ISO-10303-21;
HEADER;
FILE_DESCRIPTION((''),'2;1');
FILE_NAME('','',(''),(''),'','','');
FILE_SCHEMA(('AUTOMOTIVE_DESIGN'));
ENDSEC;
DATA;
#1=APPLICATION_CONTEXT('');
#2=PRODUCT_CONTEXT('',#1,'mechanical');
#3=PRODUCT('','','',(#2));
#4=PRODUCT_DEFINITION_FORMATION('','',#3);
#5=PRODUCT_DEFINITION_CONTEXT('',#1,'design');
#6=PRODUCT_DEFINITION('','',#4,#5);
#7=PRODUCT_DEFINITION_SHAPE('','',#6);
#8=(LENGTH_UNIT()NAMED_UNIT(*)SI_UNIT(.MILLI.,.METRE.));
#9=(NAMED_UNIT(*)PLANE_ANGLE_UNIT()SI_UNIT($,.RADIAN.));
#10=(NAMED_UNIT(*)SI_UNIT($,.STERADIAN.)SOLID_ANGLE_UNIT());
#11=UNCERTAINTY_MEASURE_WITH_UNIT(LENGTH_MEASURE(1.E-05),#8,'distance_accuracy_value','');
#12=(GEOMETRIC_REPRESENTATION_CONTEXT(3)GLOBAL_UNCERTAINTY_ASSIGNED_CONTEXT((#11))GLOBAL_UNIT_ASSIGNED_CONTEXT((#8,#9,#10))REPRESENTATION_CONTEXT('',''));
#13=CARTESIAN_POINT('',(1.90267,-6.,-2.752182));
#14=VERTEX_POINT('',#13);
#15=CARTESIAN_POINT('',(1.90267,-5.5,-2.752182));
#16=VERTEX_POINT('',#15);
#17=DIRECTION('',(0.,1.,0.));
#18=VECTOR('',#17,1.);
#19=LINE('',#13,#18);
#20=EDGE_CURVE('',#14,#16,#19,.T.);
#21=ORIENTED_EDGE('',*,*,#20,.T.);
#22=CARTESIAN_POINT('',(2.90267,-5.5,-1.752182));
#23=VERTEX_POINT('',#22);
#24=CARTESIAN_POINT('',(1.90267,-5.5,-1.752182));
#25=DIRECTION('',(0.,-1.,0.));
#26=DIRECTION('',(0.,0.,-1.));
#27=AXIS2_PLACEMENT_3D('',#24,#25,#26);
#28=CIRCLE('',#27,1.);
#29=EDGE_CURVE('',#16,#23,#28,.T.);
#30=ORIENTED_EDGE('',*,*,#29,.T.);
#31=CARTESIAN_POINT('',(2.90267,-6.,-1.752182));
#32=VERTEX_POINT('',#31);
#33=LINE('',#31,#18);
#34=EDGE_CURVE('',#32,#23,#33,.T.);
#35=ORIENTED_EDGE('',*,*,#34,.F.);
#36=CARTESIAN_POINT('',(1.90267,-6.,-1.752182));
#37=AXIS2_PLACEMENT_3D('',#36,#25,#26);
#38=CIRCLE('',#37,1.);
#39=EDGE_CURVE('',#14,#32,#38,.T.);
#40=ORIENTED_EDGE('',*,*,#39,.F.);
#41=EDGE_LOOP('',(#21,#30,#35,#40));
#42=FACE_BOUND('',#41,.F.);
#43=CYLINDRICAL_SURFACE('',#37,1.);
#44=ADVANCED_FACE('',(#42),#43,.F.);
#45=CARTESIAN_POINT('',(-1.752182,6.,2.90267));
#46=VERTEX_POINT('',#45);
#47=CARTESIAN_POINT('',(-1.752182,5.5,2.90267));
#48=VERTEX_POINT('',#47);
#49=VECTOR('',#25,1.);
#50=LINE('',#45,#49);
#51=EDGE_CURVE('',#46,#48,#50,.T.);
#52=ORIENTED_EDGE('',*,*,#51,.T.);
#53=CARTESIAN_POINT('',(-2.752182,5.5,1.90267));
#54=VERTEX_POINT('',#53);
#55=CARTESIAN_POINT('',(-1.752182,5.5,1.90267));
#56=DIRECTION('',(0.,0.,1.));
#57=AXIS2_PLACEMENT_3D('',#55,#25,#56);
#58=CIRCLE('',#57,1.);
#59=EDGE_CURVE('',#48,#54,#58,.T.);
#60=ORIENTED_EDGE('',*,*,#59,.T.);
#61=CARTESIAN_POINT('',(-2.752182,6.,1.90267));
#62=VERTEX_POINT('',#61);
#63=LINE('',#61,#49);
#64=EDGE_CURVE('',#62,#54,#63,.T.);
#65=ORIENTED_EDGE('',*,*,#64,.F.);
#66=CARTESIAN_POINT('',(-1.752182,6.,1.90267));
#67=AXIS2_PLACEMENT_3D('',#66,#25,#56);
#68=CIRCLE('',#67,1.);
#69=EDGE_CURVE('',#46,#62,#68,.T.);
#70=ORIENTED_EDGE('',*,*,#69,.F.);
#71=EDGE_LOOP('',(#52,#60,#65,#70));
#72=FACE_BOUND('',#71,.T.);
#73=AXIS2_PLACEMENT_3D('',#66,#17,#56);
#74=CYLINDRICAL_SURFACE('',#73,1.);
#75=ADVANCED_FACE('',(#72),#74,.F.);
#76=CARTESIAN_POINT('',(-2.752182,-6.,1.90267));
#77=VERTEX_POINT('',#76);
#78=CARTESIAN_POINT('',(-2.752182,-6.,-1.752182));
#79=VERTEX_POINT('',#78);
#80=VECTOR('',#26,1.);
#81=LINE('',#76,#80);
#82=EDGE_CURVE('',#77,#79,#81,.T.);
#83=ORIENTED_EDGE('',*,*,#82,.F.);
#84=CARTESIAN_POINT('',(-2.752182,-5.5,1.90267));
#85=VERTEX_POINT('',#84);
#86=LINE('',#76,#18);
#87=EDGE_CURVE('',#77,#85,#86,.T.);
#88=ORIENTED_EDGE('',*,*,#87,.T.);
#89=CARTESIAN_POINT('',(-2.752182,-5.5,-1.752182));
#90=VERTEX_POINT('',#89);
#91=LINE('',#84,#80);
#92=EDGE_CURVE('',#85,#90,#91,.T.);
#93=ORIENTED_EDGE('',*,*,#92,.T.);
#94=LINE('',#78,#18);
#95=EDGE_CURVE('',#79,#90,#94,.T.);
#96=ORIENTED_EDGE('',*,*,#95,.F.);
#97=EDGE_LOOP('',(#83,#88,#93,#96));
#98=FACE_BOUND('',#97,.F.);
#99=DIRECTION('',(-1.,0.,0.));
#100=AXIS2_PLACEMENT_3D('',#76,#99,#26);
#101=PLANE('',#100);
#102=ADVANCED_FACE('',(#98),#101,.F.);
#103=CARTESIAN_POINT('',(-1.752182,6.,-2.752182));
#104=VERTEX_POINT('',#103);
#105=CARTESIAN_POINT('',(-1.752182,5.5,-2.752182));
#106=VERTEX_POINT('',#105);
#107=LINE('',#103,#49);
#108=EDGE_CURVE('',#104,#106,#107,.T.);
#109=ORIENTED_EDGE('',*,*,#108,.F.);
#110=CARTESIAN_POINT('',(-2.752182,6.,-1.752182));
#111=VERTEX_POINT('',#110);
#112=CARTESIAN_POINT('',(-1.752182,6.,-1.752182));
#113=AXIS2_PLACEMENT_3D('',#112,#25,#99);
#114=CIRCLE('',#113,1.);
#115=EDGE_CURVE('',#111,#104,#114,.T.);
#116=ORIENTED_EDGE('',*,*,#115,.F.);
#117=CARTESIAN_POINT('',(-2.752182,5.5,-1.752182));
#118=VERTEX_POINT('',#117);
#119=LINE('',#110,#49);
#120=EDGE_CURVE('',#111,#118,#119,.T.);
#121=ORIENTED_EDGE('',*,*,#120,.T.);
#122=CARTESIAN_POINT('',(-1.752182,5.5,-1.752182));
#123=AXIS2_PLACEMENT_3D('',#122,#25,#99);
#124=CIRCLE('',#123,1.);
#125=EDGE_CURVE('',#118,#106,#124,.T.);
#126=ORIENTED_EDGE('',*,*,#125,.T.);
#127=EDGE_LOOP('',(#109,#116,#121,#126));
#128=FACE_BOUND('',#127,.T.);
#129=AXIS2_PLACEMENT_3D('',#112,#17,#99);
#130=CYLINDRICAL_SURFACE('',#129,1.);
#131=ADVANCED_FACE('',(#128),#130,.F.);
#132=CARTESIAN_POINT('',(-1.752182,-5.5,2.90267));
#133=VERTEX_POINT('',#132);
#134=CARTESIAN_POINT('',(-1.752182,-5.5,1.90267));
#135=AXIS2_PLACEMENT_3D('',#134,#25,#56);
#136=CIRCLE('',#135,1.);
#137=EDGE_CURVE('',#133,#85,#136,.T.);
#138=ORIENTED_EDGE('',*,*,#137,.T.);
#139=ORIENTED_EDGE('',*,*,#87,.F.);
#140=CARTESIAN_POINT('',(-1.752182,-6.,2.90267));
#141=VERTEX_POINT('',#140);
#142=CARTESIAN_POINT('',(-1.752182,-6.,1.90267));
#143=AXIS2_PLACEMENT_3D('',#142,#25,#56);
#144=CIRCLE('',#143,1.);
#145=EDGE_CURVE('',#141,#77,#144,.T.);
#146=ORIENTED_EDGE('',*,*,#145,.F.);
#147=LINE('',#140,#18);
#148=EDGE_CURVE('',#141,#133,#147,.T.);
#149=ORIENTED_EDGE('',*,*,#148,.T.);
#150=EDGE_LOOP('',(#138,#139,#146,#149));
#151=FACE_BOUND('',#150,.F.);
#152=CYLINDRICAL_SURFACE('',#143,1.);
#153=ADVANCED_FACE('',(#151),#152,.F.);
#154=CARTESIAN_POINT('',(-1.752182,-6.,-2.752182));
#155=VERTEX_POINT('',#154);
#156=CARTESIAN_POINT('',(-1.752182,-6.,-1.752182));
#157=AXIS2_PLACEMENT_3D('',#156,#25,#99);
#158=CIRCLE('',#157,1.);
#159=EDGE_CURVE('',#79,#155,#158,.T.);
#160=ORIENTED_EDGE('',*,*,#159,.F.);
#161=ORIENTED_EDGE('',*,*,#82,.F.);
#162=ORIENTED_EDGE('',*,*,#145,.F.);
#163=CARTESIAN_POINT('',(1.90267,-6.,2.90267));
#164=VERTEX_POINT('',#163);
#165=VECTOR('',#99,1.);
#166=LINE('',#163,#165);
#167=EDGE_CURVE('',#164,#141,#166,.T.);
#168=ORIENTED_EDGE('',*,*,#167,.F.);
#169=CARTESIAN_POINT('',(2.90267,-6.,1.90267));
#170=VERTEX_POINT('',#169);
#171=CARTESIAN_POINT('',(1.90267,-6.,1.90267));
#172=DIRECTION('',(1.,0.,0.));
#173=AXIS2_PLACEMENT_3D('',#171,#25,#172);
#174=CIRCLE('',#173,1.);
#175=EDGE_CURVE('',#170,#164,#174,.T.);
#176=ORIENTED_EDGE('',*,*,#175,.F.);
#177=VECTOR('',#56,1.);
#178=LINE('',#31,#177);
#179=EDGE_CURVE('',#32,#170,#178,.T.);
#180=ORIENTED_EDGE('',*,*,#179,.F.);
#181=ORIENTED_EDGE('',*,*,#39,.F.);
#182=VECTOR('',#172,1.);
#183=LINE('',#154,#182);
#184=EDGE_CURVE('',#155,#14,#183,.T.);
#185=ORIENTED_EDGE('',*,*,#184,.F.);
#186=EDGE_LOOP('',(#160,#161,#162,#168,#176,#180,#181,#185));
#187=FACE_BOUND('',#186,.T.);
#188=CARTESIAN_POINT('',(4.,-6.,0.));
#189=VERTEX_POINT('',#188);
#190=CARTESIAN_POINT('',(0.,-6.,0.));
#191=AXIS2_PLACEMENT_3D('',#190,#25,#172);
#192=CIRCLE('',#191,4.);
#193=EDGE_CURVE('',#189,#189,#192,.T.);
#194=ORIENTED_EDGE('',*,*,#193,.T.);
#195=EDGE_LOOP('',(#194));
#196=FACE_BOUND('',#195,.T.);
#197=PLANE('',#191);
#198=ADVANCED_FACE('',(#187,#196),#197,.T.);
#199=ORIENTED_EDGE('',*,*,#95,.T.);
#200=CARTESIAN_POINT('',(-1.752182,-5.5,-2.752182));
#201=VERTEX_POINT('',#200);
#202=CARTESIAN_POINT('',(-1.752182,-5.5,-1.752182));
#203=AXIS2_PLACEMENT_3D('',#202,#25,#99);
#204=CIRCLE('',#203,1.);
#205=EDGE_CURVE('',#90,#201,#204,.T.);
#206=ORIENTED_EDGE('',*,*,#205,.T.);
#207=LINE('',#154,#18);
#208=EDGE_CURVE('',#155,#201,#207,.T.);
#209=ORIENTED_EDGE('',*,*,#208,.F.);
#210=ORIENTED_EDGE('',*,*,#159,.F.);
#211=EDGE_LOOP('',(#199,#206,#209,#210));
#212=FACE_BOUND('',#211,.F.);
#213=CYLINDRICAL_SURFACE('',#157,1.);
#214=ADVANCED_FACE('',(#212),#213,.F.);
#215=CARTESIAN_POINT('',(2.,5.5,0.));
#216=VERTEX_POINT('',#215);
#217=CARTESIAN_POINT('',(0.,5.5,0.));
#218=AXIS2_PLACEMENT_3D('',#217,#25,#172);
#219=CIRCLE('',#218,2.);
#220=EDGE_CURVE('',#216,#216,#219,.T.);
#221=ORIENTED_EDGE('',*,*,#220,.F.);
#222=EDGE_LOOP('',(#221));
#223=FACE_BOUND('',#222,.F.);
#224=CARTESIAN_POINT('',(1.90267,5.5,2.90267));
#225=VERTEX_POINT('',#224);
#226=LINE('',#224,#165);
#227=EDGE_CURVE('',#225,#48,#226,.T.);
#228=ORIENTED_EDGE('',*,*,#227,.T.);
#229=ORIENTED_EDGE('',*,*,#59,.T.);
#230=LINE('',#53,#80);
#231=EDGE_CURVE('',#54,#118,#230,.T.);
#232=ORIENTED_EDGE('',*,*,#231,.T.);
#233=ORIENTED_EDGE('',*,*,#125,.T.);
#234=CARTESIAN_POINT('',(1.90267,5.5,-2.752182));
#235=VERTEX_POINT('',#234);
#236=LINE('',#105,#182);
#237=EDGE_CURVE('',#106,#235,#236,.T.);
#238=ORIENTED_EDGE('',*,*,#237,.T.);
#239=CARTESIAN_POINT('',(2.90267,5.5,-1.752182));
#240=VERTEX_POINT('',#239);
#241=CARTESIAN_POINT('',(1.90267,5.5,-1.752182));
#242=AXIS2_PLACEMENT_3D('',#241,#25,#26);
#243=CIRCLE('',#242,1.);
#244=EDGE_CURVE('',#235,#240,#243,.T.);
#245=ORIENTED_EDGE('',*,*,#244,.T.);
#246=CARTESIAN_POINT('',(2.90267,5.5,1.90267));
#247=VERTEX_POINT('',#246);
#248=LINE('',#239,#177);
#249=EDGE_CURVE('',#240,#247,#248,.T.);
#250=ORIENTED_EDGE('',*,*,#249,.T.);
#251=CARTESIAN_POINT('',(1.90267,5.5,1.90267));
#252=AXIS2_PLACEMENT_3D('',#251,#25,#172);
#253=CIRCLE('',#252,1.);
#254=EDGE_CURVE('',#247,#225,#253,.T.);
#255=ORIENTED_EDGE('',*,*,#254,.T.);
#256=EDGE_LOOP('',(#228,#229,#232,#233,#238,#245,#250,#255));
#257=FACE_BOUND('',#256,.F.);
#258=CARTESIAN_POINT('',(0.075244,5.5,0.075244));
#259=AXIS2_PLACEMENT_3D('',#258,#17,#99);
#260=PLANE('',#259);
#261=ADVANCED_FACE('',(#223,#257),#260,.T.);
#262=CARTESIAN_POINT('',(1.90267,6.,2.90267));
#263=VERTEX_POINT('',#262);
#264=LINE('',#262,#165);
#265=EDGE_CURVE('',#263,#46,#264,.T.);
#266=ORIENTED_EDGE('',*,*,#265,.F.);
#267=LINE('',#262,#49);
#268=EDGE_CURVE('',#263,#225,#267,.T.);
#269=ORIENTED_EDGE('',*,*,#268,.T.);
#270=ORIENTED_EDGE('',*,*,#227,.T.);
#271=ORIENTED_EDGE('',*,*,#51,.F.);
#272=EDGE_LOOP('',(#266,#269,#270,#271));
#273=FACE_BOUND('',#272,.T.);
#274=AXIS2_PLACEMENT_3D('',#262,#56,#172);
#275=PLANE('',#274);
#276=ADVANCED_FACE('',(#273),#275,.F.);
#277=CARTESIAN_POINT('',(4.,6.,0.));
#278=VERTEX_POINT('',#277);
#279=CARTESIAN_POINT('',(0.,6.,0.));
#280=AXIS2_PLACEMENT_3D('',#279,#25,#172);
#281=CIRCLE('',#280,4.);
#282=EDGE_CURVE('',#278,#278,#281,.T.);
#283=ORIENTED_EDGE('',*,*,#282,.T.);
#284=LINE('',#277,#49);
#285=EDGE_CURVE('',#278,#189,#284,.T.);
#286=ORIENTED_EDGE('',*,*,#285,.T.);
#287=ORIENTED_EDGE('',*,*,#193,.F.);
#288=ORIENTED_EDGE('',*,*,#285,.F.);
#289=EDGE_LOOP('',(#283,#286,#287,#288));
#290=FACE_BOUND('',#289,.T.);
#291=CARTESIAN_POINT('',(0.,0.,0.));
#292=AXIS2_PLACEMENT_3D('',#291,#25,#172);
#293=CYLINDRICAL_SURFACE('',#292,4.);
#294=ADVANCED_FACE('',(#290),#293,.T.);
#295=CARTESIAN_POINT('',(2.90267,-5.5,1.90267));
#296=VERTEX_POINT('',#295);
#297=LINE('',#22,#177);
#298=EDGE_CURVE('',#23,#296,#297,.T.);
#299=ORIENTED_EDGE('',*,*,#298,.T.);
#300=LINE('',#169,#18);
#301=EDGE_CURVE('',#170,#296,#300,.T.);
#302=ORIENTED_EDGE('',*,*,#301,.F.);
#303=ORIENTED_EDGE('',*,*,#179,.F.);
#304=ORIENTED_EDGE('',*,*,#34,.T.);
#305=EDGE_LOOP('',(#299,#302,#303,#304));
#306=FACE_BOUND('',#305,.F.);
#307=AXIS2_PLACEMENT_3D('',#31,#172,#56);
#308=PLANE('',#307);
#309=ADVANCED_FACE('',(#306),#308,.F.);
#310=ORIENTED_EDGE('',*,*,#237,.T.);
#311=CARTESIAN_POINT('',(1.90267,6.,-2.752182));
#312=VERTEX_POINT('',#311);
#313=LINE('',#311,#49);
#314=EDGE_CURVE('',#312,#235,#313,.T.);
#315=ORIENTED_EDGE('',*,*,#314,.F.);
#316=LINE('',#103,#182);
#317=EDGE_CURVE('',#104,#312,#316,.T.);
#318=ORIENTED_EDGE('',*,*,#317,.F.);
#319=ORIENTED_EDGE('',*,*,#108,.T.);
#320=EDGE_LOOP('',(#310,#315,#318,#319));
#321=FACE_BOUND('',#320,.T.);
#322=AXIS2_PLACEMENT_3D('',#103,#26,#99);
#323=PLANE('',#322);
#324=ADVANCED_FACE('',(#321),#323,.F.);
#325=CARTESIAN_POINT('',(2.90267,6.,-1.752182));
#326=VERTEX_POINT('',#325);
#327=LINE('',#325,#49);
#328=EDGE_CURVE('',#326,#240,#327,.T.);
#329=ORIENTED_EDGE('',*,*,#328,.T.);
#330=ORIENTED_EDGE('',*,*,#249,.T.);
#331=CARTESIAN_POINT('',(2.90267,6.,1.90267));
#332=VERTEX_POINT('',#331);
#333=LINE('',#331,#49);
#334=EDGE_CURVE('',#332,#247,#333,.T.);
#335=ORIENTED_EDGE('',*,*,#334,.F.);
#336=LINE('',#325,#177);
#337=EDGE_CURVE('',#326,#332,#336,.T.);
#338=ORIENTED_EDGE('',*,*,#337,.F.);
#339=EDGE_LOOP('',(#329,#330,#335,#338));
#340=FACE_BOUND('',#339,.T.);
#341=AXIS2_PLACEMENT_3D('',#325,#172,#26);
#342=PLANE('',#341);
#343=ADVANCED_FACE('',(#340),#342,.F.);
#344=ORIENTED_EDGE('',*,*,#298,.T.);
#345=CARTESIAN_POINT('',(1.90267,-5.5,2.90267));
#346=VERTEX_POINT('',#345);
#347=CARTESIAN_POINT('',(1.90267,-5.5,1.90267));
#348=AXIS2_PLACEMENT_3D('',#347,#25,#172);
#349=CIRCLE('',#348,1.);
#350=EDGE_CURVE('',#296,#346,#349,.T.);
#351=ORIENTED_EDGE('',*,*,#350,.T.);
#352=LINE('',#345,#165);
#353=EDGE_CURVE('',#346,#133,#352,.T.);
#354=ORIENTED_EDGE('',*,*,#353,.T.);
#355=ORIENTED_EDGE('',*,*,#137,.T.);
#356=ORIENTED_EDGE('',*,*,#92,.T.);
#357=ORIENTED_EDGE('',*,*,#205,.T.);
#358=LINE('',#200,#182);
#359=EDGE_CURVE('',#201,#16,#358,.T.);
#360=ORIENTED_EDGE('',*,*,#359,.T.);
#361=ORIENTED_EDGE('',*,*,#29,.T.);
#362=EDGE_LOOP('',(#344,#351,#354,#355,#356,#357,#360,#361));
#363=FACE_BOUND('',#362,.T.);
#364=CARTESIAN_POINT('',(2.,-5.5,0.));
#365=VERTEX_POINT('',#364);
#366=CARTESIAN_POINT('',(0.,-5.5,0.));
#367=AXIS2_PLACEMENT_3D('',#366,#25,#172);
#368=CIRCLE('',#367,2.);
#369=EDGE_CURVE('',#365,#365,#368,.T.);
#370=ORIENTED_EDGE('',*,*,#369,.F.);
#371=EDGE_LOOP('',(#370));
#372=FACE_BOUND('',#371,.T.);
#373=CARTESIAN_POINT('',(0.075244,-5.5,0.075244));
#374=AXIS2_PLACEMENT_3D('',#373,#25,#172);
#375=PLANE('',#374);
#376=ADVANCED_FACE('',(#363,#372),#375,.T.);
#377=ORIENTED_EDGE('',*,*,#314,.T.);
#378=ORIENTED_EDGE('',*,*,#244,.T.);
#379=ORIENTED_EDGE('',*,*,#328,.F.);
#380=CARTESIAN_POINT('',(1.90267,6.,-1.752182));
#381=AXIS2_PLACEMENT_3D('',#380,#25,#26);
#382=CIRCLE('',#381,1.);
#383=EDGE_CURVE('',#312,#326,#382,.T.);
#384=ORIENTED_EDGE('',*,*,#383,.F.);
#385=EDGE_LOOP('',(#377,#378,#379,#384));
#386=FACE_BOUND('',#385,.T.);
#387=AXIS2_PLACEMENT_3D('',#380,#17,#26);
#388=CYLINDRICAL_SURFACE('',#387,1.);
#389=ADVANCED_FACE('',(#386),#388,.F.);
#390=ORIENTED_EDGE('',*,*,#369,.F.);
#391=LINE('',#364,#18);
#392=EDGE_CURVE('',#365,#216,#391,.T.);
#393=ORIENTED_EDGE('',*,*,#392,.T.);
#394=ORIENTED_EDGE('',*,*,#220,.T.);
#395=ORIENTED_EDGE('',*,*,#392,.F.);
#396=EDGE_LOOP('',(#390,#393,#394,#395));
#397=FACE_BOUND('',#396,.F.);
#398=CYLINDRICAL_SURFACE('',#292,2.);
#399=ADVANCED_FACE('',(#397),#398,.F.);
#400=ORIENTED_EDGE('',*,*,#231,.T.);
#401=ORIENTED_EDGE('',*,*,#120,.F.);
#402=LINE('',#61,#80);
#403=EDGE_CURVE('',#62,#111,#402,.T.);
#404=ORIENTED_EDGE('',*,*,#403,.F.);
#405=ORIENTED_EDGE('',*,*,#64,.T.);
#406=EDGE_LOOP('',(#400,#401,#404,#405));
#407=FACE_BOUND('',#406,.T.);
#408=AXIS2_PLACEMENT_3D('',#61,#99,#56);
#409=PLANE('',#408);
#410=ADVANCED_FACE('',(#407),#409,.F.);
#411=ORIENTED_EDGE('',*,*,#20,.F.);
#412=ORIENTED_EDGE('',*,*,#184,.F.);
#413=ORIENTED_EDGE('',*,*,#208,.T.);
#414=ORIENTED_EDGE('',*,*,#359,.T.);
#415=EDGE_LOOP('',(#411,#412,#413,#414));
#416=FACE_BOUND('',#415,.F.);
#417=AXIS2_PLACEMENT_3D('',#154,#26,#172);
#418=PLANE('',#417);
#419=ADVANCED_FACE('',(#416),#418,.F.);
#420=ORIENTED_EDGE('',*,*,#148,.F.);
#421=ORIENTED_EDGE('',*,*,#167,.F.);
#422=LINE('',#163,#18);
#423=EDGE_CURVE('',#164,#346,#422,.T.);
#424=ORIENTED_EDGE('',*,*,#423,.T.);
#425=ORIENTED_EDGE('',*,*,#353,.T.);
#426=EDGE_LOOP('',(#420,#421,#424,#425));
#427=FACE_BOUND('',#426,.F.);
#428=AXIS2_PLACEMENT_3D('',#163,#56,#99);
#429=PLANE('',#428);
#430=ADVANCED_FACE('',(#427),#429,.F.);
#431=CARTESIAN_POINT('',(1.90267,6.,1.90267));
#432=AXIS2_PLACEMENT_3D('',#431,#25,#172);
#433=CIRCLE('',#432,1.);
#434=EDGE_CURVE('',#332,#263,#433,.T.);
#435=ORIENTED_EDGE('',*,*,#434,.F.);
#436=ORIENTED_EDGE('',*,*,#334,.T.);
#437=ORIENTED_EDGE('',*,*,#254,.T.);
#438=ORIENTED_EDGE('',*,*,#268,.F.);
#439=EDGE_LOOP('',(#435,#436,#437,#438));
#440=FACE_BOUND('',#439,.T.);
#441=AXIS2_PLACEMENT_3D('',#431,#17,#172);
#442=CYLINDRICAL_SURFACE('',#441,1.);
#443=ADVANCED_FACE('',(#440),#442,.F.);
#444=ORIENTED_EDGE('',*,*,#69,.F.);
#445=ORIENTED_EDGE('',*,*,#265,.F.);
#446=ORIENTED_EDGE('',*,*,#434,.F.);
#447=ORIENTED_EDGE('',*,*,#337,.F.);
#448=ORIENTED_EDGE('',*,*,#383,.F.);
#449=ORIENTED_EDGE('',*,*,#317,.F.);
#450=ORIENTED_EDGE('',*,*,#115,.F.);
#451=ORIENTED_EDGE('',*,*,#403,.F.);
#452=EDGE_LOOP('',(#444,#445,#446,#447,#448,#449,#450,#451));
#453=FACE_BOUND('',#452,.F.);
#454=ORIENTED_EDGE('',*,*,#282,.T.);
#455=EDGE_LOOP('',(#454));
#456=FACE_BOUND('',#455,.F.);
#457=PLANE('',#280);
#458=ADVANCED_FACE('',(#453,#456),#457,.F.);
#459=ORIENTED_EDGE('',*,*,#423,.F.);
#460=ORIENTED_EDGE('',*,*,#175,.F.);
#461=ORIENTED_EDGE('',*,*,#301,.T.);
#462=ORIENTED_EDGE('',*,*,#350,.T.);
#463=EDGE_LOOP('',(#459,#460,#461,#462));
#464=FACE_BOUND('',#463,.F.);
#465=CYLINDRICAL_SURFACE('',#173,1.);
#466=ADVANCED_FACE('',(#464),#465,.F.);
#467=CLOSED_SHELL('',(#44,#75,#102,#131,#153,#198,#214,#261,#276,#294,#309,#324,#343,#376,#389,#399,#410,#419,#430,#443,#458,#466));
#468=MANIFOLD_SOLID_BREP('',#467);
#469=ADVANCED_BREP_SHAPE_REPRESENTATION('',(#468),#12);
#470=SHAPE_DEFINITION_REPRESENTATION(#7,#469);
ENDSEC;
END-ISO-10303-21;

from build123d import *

# Parameters (mm, degrees)
F0_R          = 4
F0_R_2        = 2
F1_DEPTH      = 6
F1_DEPTH_BACK = 6
F2_R          = 2
F3_DEPTH      = 0.5


# Not quite as in the source:
# - a pattern or mirror of a feature is missing from the dataset's text; its kind, count and spacing are read off the source's solid


with BuildPart() as f1:
    # F0 (on Front) → F1 (new body, two sides)
    with BuildSketch(Plane.XZ) as f1_sk:
        Circle(F0_R)
        Circle(F0_R_2, mode=Mode.SUBTRACT)
    extrude(amount=F1_DEPTH)
    extrude(f1_sk.sketch, amount=-F1_DEPTH_BACK)

    # F2 (on face) → F3 (cut)
    with BuildSketch(Plane.XZ.offset(6)):
        with BuildLine():
            Line((1.902670174, 2.902670174), (-1.7521820182, 2.902670174))
            ThreePointArc((-1.7521820182, 2.902670174), (-2.4592887994, 2.6097769551), (-2.7521820182, 1.902670174))
            Line((-2.7521820182, 1.902670174), (-2.7521820182, -1.7521820182))
            ThreePointArc((-2.7521820182, -1.7521820182), (-2.4592887994, -2.4592887994), (-1.7521820182, -2.7521820182))
            Line((-1.7521820182, -2.7521820182), (1.902670174, -2.7521820182))
            ThreePointArc((1.902670174, -2.7521820182), (2.6097769551, -2.4592887994), (2.902670174, -1.7521820182))
            Line((2.902670174, -1.7521820182), (2.902670174, 1.902670174))
            ThreePointArc((2.902670174, 1.902670174), (2.6097769551, 2.6097769551), (1.902670174, 2.902670174))
        make_face()
        Circle(F2_R, mode=Mode.SUBTRACT)
    f3 = extrude(amount=-F3_DEPTH, mode=Mode.SUBTRACT)

    # F3_copies: F3 across plane
    add(f3.mirror(Plane.ZX), mode=Mode.SUBTRACT)


solid = f1.part
